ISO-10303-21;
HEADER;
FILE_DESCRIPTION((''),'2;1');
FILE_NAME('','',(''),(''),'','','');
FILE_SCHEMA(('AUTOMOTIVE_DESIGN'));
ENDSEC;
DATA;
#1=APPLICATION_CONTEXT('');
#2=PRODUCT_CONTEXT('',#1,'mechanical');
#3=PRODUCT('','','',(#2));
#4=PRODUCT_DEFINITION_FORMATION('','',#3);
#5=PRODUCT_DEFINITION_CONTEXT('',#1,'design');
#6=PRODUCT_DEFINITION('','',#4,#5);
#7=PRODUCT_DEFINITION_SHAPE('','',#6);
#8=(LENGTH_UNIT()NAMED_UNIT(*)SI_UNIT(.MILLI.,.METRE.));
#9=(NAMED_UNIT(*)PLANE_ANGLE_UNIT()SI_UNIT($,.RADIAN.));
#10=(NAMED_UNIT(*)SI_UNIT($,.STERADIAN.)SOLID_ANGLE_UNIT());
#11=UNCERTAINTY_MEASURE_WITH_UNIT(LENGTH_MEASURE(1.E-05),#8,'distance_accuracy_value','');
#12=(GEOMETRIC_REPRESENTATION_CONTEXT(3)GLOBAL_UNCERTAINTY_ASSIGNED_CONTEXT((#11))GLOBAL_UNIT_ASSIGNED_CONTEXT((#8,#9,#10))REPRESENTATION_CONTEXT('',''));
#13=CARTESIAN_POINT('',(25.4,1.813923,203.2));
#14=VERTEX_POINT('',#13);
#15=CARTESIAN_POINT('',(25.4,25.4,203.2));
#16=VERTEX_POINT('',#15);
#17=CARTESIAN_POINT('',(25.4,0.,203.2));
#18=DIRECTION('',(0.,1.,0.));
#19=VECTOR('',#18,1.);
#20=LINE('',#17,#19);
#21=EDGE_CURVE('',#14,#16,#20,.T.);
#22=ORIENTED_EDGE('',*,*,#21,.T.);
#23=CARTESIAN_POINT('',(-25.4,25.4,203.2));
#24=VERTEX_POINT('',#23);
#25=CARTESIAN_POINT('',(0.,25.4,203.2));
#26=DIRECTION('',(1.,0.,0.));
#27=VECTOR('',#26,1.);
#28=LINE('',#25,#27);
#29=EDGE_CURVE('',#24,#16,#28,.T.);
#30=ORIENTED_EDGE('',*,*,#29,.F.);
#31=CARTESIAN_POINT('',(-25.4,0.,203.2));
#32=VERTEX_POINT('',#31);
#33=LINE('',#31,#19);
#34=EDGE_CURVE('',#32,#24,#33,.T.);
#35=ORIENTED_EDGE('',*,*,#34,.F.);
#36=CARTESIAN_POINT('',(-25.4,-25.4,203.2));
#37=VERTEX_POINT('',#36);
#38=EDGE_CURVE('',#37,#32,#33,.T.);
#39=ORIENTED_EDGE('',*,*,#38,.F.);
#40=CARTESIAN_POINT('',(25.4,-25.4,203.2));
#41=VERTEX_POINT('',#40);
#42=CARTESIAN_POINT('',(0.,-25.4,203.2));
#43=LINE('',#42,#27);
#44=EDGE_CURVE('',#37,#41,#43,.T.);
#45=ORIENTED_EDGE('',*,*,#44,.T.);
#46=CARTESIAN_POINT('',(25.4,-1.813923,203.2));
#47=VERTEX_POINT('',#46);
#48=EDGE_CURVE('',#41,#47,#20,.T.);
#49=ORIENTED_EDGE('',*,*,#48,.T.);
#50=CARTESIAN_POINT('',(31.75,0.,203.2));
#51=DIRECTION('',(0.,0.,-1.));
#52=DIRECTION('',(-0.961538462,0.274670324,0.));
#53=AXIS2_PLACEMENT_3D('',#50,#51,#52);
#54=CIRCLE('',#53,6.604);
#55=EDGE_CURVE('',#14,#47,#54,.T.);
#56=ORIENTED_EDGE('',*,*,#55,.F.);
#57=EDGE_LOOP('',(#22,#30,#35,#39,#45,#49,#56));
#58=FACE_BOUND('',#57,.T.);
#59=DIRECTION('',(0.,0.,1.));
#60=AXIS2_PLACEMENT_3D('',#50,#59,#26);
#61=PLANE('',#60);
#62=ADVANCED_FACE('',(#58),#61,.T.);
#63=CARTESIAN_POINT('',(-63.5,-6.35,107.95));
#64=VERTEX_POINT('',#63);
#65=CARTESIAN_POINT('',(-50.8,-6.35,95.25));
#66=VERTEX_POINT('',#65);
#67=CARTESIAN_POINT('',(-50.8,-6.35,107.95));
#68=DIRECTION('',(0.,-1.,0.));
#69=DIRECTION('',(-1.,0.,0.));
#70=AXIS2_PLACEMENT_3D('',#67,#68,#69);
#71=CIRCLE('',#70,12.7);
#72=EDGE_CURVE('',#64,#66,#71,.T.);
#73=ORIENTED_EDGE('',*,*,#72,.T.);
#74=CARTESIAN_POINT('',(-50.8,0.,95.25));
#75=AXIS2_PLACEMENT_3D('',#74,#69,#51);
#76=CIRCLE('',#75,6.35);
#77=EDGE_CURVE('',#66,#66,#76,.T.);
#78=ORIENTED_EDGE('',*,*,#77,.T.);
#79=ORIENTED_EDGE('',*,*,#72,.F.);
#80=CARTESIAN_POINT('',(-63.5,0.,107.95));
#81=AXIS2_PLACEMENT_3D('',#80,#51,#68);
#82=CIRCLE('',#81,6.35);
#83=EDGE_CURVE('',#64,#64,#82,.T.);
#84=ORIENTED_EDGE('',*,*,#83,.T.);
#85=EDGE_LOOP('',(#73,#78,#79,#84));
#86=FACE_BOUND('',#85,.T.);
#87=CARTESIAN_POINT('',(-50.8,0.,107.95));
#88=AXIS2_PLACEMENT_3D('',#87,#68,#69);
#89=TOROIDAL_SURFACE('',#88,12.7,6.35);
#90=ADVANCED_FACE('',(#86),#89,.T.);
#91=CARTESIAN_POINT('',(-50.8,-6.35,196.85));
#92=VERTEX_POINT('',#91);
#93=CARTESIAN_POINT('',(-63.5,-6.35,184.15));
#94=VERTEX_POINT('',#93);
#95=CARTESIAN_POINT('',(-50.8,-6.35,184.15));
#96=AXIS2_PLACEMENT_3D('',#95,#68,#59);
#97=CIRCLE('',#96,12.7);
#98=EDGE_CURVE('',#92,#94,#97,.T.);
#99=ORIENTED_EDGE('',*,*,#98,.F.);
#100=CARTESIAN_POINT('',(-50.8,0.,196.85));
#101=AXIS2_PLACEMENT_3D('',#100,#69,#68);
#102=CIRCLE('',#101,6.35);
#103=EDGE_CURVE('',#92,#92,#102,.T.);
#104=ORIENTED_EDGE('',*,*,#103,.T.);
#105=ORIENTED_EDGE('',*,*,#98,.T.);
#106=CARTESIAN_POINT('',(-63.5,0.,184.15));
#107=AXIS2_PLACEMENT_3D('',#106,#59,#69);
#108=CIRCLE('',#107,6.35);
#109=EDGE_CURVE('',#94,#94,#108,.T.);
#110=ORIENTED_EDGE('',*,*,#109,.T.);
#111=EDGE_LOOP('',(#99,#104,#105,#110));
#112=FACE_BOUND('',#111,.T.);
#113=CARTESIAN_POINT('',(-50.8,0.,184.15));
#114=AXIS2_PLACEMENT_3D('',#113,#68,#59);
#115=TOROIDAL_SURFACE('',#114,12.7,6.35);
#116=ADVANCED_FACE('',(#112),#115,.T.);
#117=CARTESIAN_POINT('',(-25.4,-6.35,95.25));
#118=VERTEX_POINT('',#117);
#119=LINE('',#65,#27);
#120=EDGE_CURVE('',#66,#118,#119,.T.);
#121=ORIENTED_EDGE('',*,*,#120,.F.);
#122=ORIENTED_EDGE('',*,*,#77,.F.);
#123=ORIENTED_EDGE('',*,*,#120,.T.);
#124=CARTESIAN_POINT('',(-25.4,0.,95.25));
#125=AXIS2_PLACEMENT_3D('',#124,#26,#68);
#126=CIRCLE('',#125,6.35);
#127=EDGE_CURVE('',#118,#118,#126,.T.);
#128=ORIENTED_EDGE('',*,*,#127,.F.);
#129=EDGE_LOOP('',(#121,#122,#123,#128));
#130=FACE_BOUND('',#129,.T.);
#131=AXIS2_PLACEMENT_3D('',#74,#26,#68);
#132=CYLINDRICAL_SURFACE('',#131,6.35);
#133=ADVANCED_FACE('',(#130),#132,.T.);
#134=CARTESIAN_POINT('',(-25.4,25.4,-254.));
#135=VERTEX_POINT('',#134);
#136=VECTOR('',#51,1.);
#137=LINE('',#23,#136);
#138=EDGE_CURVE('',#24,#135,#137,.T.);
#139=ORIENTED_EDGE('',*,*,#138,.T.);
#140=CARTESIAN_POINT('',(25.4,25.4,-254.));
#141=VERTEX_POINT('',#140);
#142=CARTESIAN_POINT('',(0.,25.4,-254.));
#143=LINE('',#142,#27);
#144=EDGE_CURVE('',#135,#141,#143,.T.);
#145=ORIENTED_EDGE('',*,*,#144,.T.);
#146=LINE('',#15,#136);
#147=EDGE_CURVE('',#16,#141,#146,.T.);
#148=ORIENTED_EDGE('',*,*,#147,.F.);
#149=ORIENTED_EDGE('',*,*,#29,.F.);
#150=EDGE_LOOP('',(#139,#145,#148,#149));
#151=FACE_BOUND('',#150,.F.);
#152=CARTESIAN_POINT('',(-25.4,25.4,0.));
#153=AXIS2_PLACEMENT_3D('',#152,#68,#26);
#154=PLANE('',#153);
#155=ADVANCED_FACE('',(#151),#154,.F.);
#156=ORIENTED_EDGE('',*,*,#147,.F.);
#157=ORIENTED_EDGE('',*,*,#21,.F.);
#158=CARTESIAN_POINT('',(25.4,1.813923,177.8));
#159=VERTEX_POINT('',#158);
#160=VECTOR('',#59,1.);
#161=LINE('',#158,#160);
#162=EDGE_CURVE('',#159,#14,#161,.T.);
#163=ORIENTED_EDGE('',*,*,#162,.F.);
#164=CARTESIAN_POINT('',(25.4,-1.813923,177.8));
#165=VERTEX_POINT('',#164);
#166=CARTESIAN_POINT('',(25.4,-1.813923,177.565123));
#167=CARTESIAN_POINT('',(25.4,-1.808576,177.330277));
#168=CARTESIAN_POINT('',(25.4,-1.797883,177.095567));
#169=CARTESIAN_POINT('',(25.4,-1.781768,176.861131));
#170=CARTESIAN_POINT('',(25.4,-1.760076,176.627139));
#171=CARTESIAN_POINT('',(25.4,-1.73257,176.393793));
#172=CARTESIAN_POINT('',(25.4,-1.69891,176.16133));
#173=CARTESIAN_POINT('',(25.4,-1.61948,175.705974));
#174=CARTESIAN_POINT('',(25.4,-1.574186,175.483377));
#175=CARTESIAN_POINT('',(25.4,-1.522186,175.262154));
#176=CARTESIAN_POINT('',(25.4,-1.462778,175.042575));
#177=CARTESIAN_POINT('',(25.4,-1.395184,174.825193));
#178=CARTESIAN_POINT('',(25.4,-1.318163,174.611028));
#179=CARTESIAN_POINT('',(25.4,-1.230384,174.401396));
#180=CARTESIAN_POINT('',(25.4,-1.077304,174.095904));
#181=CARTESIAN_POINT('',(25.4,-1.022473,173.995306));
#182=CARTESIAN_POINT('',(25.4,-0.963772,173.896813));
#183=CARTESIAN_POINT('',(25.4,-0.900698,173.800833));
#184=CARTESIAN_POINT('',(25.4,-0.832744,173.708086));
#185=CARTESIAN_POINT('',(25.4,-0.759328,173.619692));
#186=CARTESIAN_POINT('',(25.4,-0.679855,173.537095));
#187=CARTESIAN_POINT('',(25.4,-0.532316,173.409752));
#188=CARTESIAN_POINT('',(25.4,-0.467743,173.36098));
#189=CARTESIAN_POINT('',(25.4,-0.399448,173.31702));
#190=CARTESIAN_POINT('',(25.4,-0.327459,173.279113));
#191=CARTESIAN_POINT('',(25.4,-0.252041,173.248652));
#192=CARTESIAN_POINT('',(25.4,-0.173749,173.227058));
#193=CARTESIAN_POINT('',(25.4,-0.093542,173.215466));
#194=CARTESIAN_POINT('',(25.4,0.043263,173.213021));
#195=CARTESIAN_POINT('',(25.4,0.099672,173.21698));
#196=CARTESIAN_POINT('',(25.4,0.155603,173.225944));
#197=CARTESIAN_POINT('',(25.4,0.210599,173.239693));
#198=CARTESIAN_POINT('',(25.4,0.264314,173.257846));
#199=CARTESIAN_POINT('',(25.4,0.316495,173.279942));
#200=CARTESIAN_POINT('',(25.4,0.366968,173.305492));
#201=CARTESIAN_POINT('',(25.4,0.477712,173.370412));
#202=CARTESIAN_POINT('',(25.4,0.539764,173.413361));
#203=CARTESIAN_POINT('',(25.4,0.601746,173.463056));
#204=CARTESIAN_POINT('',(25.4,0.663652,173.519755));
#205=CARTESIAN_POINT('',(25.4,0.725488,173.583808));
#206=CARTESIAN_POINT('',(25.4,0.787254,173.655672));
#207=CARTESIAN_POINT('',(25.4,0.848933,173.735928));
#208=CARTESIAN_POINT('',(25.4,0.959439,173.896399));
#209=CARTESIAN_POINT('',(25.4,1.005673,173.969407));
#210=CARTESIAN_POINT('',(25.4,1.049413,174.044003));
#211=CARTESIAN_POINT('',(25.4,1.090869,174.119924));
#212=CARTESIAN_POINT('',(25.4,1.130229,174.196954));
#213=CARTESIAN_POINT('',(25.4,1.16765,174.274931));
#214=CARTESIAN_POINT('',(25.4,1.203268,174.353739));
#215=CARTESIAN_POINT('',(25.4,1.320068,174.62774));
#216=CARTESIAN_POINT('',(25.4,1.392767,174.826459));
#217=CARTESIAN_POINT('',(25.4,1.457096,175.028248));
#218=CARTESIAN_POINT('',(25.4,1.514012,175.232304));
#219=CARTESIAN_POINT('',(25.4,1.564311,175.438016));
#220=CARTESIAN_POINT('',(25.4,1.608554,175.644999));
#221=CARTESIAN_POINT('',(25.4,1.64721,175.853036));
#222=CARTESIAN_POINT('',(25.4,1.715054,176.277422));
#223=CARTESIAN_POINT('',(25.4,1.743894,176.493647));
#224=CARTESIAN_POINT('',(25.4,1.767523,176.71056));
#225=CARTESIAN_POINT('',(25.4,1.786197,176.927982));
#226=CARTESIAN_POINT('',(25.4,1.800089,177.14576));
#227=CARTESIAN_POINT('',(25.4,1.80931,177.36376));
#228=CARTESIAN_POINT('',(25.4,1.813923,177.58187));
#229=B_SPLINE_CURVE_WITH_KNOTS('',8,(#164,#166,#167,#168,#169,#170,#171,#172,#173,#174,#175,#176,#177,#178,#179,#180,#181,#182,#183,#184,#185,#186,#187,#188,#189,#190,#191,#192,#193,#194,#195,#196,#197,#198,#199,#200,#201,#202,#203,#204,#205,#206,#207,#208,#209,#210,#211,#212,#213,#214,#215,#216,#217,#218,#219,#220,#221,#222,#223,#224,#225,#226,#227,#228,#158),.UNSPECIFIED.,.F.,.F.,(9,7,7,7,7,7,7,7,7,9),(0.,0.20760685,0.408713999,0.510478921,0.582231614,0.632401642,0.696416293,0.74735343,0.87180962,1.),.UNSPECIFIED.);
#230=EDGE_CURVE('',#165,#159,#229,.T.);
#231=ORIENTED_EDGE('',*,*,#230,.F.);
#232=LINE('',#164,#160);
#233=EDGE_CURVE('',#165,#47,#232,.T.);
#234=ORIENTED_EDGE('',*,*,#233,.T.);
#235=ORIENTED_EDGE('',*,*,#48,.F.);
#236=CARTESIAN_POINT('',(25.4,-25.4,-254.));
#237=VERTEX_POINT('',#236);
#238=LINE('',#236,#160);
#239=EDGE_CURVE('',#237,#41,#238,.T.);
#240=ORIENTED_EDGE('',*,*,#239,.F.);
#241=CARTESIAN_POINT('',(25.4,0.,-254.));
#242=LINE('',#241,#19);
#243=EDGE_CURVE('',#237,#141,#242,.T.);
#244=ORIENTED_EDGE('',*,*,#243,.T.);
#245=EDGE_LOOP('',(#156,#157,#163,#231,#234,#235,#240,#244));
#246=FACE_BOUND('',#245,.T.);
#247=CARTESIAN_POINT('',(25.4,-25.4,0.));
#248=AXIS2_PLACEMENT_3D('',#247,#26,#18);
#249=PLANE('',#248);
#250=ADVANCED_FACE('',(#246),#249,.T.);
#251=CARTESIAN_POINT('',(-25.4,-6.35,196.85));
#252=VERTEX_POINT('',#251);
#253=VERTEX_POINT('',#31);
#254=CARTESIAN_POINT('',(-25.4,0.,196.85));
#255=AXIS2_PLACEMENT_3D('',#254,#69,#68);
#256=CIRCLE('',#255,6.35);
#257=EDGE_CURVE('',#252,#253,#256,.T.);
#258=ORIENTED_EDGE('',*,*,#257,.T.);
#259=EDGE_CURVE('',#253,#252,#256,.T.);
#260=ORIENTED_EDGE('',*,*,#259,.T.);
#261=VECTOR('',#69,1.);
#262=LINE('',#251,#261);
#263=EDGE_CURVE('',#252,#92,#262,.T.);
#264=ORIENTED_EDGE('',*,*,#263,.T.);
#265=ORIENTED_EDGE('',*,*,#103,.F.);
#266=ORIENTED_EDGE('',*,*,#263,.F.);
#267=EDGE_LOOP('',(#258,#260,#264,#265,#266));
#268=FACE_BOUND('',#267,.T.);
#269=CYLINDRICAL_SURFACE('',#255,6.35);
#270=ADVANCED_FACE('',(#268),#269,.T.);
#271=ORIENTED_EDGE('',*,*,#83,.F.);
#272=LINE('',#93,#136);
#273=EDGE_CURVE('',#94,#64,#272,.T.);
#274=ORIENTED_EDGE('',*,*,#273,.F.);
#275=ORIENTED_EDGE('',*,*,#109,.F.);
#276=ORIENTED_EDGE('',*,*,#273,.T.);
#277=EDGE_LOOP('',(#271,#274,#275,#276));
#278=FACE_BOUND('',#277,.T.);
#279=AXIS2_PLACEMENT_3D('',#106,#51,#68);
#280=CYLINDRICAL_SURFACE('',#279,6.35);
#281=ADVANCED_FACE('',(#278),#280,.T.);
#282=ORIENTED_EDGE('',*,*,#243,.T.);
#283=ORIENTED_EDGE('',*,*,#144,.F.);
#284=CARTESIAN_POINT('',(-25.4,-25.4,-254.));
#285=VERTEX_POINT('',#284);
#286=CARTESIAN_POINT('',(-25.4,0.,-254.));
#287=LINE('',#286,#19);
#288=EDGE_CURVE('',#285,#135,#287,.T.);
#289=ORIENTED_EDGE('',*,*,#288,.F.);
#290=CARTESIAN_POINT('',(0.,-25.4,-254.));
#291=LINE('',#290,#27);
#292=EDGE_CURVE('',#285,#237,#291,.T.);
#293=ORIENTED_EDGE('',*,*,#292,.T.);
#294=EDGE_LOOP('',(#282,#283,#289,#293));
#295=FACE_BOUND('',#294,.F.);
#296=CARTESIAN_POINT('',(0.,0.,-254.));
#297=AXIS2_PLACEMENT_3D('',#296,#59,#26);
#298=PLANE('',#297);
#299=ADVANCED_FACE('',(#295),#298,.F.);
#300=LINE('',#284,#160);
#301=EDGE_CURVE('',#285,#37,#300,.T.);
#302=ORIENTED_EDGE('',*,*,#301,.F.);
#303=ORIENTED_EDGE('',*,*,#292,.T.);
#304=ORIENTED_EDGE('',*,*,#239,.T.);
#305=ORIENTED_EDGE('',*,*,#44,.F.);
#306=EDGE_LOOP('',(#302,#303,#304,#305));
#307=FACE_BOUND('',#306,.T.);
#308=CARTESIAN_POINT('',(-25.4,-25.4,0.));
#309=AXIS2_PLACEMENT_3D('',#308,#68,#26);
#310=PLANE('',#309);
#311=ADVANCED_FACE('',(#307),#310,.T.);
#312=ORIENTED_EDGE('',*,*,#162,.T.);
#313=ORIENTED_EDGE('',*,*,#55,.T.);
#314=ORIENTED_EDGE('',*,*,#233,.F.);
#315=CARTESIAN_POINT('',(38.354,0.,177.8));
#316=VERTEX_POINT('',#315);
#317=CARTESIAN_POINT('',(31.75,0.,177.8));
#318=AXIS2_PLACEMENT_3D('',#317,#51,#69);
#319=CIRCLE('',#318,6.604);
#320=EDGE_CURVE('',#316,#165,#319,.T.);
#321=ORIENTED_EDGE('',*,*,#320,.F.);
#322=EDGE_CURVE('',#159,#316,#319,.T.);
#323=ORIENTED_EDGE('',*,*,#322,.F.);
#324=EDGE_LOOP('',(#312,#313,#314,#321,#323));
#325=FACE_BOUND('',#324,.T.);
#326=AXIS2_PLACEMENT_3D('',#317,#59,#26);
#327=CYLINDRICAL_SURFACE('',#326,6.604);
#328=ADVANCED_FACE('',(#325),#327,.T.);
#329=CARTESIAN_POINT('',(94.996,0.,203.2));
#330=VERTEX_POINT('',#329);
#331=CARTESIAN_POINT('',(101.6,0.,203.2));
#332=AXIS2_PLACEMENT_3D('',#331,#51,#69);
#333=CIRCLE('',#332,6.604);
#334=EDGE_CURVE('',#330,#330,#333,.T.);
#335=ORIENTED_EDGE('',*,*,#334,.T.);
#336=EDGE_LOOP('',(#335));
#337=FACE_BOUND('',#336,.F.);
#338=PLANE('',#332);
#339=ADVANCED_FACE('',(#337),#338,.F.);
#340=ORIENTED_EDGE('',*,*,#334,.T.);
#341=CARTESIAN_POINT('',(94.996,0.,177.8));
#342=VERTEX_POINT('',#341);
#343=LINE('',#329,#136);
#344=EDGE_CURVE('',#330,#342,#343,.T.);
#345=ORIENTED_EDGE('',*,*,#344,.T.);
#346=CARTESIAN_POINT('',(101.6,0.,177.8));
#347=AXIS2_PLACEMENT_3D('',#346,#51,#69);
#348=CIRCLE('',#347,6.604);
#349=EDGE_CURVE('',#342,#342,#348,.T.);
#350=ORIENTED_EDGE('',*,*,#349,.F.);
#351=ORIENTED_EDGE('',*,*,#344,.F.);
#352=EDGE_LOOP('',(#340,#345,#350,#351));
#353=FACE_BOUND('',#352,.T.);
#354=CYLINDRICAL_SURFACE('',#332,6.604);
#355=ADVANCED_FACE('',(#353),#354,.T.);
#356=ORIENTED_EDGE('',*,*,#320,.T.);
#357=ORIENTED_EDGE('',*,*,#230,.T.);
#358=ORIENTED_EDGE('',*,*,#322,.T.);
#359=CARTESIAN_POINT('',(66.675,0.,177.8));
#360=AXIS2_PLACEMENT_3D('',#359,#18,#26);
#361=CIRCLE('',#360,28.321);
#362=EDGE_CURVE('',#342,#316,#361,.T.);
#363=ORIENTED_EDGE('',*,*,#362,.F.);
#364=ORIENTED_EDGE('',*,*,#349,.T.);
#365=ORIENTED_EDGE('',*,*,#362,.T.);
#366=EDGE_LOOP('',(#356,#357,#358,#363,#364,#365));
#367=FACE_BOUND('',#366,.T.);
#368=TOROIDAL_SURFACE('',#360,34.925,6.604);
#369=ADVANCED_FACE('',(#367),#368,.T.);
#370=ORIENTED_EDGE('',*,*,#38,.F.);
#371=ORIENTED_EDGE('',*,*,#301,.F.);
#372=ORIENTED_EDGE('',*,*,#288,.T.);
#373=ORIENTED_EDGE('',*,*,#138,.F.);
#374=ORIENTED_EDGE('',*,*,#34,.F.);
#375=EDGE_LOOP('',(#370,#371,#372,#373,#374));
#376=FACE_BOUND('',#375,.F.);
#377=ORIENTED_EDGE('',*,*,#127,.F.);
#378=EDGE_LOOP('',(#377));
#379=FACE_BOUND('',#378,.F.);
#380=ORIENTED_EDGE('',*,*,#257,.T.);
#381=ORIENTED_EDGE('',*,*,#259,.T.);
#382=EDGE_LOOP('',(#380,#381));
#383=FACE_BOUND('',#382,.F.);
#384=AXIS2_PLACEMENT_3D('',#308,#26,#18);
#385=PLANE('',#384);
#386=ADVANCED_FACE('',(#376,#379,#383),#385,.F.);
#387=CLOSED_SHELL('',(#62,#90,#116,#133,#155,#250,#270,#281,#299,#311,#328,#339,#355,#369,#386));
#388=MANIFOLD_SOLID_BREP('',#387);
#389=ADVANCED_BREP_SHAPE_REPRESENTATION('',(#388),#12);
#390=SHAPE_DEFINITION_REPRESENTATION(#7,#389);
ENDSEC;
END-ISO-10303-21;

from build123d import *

# Parameters (mm, degrees)
F0_W          = 50.8
F0_H          = 50.8
F1_DEPTH      = 203.2
F1_DEPTH_BACK = 254
F3_R          = 6.604
F6_R          = 6.35


with BuildPart() as f1:
    # F0 (on Top) → F1 (new body, two sides)
    with BuildSketch(Plane.XY) as f1_sk:
        Rectangle(F0_W, F0_H)
    extrude(amount=F1_DEPTH)
    extrude(f1_sk.sketch, amount=-F1_DEPTH_BACK)

    # F4: sweep along a path in F2
    with BuildLine(Plane.XZ) as f4_path:
        Line((101.6, 203.2), (101.6, 177.8))
        ThreePointArc((101.6, 177.8), (66.675, 142.875), (31.75, 177.8))
        Line((31.75, 177.8), (31.75, 203.2))
    # F3 (on face) → F4 (sweep)
    with BuildSketch(Plane.XY.offset(203.2)):
        with Locations((31.75, 0)):
            Circle(F3_R)
    sweep(path=f4_path.line)

    # F7: sweep along a path in F5
    with BuildLine(Plane.XZ) as f7_path:
        Line((-25.4, 196.85), (-50.8, 196.85))
        ThreePointArc((-50.8, 196.85), (-59.7802561211, 193.1302561211), (-63.5, 184.15))
        Line((-63.5, 184.15), (-63.5, 107.95))
        ThreePointArc((-63.5, 107.95), (-59.7802561211, 98.9697438789), (-50.8, 95.25))
        Line((-50.8, 95.25), (-25.3296792507, 95.25))
    # F6 (on face) → F7 (sweep)
    with BuildSketch(Plane(origin=(-25.4, 0, 0), x_dir=(0, -1, 0), z_dir=(-1, 0, 0))):
        with Locations((0, 196.85)):
            Circle(F6_R)
    sweep(path=f7_path.line)


solid = f1.part
